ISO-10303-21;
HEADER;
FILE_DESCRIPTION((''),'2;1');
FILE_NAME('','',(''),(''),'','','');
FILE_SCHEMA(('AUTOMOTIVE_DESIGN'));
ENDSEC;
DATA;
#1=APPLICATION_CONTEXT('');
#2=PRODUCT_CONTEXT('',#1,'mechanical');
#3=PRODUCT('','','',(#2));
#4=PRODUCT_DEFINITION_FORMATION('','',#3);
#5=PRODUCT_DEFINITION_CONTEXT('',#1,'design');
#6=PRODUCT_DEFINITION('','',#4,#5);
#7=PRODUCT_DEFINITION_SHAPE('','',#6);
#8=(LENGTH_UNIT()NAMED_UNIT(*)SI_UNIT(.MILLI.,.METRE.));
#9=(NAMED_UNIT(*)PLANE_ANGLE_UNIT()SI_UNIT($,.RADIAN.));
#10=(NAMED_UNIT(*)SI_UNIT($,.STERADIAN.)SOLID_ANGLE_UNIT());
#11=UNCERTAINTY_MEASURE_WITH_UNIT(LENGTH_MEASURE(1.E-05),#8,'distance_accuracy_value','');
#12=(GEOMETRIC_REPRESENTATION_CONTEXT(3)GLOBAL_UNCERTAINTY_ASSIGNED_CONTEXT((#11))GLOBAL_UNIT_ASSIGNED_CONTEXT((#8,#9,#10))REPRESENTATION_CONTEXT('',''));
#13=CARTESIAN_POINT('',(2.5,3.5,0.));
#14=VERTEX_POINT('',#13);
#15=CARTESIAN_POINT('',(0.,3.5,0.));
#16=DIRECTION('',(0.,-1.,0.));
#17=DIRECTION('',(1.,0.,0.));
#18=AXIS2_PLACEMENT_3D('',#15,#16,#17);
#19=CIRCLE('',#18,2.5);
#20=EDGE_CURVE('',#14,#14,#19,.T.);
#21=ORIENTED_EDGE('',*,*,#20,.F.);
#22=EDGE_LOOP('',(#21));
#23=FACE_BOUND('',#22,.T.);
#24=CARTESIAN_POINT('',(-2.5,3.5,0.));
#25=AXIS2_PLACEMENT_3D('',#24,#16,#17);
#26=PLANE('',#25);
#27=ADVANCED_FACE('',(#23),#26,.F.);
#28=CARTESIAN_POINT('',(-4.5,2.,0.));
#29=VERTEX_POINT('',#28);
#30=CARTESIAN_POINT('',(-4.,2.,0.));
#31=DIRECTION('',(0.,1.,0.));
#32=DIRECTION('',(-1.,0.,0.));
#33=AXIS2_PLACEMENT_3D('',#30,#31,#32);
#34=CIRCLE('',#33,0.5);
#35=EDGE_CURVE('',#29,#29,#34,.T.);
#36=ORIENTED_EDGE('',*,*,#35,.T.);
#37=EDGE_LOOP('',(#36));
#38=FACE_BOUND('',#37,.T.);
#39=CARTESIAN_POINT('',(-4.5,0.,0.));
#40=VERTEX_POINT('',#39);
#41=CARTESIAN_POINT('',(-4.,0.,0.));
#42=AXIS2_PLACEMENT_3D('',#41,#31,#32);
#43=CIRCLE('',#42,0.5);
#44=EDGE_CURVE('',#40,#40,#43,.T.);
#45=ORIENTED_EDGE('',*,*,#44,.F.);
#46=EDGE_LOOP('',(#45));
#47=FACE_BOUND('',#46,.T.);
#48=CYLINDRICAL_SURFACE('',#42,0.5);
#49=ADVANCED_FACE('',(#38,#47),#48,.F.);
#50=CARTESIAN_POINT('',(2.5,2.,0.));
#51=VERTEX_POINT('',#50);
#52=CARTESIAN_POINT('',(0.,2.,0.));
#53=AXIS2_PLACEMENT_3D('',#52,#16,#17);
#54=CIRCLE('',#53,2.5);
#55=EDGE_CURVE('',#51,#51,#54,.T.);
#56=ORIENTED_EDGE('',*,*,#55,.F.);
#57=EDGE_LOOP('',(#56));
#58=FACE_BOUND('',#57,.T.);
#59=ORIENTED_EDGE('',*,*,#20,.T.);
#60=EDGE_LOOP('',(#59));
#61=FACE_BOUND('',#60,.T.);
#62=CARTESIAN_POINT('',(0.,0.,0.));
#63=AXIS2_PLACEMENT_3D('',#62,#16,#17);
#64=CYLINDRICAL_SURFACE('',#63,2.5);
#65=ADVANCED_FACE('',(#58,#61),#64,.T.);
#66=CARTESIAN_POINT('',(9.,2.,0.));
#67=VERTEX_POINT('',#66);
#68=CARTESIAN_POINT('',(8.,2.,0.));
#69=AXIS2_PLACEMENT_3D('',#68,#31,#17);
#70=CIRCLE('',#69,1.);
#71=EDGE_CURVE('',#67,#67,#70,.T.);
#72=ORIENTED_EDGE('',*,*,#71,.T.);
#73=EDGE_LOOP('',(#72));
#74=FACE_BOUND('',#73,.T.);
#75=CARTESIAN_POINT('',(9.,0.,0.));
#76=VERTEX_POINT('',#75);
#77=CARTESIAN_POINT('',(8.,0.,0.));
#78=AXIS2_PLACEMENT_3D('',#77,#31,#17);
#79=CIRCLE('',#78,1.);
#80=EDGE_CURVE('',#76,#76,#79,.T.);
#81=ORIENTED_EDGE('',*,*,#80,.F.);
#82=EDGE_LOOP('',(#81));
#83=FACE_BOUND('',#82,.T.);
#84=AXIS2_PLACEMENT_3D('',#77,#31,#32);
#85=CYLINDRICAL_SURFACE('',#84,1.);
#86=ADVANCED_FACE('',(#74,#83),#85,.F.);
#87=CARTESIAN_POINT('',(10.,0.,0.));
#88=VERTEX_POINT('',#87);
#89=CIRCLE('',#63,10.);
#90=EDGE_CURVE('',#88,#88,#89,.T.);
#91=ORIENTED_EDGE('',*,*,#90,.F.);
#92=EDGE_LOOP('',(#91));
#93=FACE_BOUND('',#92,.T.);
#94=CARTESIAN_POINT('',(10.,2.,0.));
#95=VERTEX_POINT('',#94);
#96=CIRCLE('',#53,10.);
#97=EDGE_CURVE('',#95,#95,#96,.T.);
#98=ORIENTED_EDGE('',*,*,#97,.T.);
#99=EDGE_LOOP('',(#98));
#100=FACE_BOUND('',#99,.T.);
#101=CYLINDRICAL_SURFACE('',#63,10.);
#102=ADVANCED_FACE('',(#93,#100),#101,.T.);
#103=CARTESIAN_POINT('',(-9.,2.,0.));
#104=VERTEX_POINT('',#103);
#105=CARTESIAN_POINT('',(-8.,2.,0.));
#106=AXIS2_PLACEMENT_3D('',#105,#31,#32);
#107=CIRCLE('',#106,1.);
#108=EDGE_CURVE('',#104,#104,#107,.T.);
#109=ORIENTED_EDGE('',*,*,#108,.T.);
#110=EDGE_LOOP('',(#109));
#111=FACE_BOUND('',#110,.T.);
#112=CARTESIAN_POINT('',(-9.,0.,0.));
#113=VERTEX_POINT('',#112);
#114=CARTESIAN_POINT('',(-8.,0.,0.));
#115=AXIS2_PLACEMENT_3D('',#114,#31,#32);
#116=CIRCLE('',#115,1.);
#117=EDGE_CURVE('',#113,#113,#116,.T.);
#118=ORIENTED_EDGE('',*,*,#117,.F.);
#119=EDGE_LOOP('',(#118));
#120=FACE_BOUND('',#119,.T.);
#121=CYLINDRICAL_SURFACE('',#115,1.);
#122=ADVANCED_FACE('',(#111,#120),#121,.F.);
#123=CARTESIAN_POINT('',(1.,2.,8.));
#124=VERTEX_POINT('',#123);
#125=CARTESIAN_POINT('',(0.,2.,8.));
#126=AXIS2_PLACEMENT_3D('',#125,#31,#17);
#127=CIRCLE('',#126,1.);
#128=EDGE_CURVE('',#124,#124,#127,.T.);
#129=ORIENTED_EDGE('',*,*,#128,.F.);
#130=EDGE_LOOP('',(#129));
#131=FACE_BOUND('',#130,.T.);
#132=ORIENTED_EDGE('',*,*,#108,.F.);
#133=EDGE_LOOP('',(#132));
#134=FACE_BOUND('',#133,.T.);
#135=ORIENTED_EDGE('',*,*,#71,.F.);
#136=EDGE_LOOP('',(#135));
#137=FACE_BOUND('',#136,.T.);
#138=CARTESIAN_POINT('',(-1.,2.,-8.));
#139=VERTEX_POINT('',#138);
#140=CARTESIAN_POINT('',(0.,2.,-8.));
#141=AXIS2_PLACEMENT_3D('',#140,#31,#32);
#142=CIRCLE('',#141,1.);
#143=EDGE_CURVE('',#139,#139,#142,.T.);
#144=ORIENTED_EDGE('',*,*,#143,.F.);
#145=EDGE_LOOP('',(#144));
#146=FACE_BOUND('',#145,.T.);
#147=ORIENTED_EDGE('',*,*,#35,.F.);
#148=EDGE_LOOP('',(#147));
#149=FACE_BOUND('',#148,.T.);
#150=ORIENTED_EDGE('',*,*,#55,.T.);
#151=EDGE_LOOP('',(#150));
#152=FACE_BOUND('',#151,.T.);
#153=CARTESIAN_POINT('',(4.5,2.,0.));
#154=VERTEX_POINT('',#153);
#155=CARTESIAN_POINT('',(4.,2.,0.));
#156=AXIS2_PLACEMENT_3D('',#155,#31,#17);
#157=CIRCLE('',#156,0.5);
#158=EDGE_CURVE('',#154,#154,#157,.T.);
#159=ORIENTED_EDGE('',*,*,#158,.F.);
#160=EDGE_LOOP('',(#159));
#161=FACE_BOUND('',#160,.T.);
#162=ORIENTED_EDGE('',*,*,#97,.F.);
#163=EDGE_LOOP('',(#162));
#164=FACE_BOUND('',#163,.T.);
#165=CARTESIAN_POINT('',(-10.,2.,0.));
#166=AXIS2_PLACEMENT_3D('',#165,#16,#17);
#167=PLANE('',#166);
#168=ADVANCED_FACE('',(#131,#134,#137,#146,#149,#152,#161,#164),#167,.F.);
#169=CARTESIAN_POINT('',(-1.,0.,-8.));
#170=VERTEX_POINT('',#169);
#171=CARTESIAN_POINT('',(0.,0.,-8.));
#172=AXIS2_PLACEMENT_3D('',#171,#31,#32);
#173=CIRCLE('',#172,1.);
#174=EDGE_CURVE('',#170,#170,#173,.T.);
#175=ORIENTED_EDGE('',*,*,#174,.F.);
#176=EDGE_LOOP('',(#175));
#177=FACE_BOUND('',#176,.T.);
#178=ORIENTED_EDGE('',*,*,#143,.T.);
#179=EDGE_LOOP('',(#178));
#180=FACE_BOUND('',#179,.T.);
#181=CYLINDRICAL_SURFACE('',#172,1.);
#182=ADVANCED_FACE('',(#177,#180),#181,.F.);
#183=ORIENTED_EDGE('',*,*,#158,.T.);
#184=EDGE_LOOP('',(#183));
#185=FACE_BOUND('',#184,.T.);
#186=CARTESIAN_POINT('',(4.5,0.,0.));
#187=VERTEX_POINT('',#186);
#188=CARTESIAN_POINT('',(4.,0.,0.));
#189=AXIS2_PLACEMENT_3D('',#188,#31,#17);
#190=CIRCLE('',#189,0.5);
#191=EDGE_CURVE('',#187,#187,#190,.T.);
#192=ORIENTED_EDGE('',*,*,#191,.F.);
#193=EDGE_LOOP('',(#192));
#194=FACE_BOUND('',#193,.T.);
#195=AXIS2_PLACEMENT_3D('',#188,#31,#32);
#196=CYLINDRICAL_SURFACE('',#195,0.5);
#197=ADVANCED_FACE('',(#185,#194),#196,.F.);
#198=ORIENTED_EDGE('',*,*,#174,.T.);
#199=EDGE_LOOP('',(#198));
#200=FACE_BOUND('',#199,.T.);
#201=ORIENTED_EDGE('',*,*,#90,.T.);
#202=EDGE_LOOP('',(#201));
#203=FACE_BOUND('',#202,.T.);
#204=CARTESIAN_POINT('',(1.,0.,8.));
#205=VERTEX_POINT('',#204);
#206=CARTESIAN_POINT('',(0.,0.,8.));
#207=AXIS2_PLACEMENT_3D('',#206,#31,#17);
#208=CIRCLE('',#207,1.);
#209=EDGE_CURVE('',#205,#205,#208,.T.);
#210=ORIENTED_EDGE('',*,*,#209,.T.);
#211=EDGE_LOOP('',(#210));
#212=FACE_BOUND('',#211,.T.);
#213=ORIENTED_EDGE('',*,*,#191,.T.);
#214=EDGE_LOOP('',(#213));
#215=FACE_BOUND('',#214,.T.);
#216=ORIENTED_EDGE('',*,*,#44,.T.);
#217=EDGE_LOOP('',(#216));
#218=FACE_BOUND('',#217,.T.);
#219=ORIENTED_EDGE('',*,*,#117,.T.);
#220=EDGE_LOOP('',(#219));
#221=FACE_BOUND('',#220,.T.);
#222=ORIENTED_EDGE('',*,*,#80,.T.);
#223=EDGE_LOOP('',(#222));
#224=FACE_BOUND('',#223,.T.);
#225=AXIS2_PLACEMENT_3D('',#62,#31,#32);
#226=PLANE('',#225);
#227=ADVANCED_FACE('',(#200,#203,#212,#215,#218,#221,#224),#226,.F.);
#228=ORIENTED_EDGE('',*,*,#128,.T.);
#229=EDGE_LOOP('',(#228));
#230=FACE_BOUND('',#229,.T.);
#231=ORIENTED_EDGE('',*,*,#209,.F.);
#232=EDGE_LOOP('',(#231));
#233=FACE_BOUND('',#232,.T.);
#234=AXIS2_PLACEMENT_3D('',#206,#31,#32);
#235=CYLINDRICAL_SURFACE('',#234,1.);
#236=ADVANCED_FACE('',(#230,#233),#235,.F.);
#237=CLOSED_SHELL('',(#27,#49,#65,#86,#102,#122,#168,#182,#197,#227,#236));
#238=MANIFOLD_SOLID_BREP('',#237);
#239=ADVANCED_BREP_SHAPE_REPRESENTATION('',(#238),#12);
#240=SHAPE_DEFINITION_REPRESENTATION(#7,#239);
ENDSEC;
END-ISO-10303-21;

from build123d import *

# Parameters (mm, degrees)
REVOLVE_1_OUTLINE_R   = 10
REVOLVE_1_DEPTH       = 2
REVOLVE_START         = 2
REVOLVE_1_2_OUTLINE_R = 2.5
REVOLVE_1_2_DEPTH     = 1.5
SKETCH_2_R            = 1
SKETCH_2_R_2          = 0.5
CUT_EXTRUDE_2_DEPTH   = 15.282856857


# Read off the part's stored shape, not the designer's step: 旋转1
with BuildPart() as part:
    # 旋转1 outline → 旋转1 (new body)
    with BuildSketch(Plane(origin=(0, 0, 0), x_dir=(1, 0, 0), z_dir=(0, 1, 0))):
        Circle(REVOLVE_1_OUTLINE_R)
    extrude(amount=REVOLVE_1_DEPTH)

    # Revolve 1 2 outline → Revolve 1 2 (add)
    with BuildSketch(Plane(origin=(0, 0, 0), x_dir=(1, 0, 0), z_dir=(0, 1, 0)).offset(REVOLVE_START)):
        Circle(REVOLVE_1_2_OUTLINE_R)
    extrude(amount=REVOLVE_1_2_DEPTH)

    # 草图2 → 切除-拉伸2 (cut, through all)
    with BuildSketch(Plane(origin=(0, 2, 0), x_dir=(1, 0, 0), z_dir=(0, 1, 0))):
        with Locations(Location((-8, 0, 0), (0, 0, 180))):
            Circle(SKETCH_2_R)
        with Locations((4, 0)):
            Circle(SKETCH_2_R_2)
        with Locations((8, 0)):
            Circle(SKETCH_2_R)
        with Locations(Location((-4, 0, 0), (0, 0, 180))):
            Circle(SKETCH_2_R_2)
        with Locations(Location((0, 8, 0), (0, 0, 180))):
            Circle(SKETCH_2_R)
        with Locations((0, -8)):
            Circle(SKETCH_2_R)
    extrude(amount=-CUT_EXTRUDE_2_DEPTH, mode=Mode.SUBTRACT)


solid = part.part
